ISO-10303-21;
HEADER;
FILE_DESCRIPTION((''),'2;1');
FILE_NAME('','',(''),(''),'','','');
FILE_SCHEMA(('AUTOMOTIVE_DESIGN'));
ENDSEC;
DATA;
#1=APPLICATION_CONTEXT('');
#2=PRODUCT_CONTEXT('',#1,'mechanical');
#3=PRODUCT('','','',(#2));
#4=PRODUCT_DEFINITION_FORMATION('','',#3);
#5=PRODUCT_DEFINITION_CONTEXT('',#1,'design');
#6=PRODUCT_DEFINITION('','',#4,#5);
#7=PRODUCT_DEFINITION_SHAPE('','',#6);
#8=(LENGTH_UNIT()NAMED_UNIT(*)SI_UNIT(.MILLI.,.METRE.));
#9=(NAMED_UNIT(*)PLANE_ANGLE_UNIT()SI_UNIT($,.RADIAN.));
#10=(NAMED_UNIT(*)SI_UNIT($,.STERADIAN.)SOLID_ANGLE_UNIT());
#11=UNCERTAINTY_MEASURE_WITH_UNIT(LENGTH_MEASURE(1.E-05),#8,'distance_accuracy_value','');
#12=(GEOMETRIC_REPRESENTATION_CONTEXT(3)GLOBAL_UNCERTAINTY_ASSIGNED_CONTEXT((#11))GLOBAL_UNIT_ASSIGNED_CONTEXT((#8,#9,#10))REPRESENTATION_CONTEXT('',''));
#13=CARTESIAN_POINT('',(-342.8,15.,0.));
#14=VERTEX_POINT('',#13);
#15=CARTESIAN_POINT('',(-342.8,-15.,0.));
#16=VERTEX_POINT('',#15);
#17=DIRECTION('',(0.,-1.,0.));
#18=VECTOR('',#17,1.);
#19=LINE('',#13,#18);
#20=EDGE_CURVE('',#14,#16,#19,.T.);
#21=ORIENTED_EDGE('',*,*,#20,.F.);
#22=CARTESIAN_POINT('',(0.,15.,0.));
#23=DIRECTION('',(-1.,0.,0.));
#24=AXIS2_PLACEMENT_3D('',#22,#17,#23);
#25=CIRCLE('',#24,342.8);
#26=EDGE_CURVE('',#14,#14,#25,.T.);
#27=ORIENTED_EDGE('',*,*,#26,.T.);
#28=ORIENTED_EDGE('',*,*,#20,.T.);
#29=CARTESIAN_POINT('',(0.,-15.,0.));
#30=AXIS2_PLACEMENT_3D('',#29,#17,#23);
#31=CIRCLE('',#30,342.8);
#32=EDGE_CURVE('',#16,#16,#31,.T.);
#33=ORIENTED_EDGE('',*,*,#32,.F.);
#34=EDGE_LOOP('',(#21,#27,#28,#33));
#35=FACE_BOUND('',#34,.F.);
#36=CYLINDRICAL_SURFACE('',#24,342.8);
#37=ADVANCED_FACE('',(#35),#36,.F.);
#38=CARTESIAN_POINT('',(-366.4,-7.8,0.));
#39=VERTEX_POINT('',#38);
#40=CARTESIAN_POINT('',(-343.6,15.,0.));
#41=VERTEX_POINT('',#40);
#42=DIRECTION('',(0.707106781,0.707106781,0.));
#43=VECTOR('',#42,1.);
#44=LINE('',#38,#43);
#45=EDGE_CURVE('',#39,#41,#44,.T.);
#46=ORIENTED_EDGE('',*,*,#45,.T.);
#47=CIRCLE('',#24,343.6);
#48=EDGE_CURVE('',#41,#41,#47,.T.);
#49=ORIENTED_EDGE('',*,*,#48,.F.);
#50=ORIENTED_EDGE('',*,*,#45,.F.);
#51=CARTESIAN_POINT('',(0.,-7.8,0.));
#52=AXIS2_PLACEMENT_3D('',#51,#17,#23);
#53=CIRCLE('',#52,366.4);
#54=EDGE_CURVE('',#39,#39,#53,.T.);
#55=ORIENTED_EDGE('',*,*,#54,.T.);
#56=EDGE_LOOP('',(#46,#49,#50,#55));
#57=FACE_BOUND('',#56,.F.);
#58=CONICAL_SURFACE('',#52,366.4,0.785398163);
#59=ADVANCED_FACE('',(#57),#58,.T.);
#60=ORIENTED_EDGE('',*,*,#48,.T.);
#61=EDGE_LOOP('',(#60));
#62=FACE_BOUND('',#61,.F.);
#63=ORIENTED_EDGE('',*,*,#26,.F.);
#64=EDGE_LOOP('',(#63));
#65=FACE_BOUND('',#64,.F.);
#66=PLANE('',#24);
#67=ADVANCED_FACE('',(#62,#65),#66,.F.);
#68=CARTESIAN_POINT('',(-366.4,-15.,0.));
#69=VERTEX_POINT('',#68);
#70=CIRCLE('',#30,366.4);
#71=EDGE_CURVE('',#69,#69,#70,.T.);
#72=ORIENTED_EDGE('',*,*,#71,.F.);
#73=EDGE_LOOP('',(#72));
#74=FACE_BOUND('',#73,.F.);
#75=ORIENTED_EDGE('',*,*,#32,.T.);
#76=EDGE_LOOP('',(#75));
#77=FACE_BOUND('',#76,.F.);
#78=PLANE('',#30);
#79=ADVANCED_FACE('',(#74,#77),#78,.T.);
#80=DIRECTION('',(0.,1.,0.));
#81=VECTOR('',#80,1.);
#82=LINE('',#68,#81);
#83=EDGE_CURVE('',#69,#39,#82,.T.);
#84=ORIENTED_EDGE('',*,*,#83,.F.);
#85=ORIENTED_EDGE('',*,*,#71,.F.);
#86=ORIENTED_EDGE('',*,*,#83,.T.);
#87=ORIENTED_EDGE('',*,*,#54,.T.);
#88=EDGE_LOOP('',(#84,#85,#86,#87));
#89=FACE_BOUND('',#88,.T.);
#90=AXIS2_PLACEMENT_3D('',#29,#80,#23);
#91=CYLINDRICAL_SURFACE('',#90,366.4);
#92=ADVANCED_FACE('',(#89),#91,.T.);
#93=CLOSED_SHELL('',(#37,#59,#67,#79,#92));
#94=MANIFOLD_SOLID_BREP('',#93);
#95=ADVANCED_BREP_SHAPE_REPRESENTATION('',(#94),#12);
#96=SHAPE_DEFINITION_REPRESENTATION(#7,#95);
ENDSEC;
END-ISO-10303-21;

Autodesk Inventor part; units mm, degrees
ref_plane "YZ Plane" through (0, 0, 0) normal (1, 0, 0) x (0, 1, 0)
ref_plane "XZ Plane" through (0, 0, 0) normal (0, 1, 0) x (-1, 0, 0)
ref_plane "XY Plane" through (0, 0, 0) normal (0, 0, 1) x (1, 0, 0)
sketch "Sketch1" plane through (0, 0, 0) normal (0, 0, 1) x (1, 0, 0)
  line L0 (0, 0.5069) -> (0, -0.5069)
  line L1 (-342.8, 15) -> (-342.8, -15)
  line L2 (-342.8, -15) -> (-366.4, -15)
  line L3 (-366.4, -15) -> (-366.4, -7.8)
  line L4 (-366.4, -7.8) -> (-343.6, 15)
  line L5 (-343.6, 15) -> (-342.8, 15)
  point P0 (0, 0)
  point P1 (0, 0)
  point P2 (-342.8, 0)
  dimension "d0" = 45
  dimension "dimensionH_parameter" = 0.8
  dimension "fasciaCollaudo1_parameter" = 23.6
  dimension "dimensionE_parameter" = 30
  dimension "externalDiameter1_parameter" = 732.8
  dimension "d38" = 685.6
revolve "Revolution3" add sketch "Sketch1" angle 360 about axis through (0, 0.5069, 0) along (0, -1, 0)
properties part number "201555-1-1-test" material "Nylon 6/6"
